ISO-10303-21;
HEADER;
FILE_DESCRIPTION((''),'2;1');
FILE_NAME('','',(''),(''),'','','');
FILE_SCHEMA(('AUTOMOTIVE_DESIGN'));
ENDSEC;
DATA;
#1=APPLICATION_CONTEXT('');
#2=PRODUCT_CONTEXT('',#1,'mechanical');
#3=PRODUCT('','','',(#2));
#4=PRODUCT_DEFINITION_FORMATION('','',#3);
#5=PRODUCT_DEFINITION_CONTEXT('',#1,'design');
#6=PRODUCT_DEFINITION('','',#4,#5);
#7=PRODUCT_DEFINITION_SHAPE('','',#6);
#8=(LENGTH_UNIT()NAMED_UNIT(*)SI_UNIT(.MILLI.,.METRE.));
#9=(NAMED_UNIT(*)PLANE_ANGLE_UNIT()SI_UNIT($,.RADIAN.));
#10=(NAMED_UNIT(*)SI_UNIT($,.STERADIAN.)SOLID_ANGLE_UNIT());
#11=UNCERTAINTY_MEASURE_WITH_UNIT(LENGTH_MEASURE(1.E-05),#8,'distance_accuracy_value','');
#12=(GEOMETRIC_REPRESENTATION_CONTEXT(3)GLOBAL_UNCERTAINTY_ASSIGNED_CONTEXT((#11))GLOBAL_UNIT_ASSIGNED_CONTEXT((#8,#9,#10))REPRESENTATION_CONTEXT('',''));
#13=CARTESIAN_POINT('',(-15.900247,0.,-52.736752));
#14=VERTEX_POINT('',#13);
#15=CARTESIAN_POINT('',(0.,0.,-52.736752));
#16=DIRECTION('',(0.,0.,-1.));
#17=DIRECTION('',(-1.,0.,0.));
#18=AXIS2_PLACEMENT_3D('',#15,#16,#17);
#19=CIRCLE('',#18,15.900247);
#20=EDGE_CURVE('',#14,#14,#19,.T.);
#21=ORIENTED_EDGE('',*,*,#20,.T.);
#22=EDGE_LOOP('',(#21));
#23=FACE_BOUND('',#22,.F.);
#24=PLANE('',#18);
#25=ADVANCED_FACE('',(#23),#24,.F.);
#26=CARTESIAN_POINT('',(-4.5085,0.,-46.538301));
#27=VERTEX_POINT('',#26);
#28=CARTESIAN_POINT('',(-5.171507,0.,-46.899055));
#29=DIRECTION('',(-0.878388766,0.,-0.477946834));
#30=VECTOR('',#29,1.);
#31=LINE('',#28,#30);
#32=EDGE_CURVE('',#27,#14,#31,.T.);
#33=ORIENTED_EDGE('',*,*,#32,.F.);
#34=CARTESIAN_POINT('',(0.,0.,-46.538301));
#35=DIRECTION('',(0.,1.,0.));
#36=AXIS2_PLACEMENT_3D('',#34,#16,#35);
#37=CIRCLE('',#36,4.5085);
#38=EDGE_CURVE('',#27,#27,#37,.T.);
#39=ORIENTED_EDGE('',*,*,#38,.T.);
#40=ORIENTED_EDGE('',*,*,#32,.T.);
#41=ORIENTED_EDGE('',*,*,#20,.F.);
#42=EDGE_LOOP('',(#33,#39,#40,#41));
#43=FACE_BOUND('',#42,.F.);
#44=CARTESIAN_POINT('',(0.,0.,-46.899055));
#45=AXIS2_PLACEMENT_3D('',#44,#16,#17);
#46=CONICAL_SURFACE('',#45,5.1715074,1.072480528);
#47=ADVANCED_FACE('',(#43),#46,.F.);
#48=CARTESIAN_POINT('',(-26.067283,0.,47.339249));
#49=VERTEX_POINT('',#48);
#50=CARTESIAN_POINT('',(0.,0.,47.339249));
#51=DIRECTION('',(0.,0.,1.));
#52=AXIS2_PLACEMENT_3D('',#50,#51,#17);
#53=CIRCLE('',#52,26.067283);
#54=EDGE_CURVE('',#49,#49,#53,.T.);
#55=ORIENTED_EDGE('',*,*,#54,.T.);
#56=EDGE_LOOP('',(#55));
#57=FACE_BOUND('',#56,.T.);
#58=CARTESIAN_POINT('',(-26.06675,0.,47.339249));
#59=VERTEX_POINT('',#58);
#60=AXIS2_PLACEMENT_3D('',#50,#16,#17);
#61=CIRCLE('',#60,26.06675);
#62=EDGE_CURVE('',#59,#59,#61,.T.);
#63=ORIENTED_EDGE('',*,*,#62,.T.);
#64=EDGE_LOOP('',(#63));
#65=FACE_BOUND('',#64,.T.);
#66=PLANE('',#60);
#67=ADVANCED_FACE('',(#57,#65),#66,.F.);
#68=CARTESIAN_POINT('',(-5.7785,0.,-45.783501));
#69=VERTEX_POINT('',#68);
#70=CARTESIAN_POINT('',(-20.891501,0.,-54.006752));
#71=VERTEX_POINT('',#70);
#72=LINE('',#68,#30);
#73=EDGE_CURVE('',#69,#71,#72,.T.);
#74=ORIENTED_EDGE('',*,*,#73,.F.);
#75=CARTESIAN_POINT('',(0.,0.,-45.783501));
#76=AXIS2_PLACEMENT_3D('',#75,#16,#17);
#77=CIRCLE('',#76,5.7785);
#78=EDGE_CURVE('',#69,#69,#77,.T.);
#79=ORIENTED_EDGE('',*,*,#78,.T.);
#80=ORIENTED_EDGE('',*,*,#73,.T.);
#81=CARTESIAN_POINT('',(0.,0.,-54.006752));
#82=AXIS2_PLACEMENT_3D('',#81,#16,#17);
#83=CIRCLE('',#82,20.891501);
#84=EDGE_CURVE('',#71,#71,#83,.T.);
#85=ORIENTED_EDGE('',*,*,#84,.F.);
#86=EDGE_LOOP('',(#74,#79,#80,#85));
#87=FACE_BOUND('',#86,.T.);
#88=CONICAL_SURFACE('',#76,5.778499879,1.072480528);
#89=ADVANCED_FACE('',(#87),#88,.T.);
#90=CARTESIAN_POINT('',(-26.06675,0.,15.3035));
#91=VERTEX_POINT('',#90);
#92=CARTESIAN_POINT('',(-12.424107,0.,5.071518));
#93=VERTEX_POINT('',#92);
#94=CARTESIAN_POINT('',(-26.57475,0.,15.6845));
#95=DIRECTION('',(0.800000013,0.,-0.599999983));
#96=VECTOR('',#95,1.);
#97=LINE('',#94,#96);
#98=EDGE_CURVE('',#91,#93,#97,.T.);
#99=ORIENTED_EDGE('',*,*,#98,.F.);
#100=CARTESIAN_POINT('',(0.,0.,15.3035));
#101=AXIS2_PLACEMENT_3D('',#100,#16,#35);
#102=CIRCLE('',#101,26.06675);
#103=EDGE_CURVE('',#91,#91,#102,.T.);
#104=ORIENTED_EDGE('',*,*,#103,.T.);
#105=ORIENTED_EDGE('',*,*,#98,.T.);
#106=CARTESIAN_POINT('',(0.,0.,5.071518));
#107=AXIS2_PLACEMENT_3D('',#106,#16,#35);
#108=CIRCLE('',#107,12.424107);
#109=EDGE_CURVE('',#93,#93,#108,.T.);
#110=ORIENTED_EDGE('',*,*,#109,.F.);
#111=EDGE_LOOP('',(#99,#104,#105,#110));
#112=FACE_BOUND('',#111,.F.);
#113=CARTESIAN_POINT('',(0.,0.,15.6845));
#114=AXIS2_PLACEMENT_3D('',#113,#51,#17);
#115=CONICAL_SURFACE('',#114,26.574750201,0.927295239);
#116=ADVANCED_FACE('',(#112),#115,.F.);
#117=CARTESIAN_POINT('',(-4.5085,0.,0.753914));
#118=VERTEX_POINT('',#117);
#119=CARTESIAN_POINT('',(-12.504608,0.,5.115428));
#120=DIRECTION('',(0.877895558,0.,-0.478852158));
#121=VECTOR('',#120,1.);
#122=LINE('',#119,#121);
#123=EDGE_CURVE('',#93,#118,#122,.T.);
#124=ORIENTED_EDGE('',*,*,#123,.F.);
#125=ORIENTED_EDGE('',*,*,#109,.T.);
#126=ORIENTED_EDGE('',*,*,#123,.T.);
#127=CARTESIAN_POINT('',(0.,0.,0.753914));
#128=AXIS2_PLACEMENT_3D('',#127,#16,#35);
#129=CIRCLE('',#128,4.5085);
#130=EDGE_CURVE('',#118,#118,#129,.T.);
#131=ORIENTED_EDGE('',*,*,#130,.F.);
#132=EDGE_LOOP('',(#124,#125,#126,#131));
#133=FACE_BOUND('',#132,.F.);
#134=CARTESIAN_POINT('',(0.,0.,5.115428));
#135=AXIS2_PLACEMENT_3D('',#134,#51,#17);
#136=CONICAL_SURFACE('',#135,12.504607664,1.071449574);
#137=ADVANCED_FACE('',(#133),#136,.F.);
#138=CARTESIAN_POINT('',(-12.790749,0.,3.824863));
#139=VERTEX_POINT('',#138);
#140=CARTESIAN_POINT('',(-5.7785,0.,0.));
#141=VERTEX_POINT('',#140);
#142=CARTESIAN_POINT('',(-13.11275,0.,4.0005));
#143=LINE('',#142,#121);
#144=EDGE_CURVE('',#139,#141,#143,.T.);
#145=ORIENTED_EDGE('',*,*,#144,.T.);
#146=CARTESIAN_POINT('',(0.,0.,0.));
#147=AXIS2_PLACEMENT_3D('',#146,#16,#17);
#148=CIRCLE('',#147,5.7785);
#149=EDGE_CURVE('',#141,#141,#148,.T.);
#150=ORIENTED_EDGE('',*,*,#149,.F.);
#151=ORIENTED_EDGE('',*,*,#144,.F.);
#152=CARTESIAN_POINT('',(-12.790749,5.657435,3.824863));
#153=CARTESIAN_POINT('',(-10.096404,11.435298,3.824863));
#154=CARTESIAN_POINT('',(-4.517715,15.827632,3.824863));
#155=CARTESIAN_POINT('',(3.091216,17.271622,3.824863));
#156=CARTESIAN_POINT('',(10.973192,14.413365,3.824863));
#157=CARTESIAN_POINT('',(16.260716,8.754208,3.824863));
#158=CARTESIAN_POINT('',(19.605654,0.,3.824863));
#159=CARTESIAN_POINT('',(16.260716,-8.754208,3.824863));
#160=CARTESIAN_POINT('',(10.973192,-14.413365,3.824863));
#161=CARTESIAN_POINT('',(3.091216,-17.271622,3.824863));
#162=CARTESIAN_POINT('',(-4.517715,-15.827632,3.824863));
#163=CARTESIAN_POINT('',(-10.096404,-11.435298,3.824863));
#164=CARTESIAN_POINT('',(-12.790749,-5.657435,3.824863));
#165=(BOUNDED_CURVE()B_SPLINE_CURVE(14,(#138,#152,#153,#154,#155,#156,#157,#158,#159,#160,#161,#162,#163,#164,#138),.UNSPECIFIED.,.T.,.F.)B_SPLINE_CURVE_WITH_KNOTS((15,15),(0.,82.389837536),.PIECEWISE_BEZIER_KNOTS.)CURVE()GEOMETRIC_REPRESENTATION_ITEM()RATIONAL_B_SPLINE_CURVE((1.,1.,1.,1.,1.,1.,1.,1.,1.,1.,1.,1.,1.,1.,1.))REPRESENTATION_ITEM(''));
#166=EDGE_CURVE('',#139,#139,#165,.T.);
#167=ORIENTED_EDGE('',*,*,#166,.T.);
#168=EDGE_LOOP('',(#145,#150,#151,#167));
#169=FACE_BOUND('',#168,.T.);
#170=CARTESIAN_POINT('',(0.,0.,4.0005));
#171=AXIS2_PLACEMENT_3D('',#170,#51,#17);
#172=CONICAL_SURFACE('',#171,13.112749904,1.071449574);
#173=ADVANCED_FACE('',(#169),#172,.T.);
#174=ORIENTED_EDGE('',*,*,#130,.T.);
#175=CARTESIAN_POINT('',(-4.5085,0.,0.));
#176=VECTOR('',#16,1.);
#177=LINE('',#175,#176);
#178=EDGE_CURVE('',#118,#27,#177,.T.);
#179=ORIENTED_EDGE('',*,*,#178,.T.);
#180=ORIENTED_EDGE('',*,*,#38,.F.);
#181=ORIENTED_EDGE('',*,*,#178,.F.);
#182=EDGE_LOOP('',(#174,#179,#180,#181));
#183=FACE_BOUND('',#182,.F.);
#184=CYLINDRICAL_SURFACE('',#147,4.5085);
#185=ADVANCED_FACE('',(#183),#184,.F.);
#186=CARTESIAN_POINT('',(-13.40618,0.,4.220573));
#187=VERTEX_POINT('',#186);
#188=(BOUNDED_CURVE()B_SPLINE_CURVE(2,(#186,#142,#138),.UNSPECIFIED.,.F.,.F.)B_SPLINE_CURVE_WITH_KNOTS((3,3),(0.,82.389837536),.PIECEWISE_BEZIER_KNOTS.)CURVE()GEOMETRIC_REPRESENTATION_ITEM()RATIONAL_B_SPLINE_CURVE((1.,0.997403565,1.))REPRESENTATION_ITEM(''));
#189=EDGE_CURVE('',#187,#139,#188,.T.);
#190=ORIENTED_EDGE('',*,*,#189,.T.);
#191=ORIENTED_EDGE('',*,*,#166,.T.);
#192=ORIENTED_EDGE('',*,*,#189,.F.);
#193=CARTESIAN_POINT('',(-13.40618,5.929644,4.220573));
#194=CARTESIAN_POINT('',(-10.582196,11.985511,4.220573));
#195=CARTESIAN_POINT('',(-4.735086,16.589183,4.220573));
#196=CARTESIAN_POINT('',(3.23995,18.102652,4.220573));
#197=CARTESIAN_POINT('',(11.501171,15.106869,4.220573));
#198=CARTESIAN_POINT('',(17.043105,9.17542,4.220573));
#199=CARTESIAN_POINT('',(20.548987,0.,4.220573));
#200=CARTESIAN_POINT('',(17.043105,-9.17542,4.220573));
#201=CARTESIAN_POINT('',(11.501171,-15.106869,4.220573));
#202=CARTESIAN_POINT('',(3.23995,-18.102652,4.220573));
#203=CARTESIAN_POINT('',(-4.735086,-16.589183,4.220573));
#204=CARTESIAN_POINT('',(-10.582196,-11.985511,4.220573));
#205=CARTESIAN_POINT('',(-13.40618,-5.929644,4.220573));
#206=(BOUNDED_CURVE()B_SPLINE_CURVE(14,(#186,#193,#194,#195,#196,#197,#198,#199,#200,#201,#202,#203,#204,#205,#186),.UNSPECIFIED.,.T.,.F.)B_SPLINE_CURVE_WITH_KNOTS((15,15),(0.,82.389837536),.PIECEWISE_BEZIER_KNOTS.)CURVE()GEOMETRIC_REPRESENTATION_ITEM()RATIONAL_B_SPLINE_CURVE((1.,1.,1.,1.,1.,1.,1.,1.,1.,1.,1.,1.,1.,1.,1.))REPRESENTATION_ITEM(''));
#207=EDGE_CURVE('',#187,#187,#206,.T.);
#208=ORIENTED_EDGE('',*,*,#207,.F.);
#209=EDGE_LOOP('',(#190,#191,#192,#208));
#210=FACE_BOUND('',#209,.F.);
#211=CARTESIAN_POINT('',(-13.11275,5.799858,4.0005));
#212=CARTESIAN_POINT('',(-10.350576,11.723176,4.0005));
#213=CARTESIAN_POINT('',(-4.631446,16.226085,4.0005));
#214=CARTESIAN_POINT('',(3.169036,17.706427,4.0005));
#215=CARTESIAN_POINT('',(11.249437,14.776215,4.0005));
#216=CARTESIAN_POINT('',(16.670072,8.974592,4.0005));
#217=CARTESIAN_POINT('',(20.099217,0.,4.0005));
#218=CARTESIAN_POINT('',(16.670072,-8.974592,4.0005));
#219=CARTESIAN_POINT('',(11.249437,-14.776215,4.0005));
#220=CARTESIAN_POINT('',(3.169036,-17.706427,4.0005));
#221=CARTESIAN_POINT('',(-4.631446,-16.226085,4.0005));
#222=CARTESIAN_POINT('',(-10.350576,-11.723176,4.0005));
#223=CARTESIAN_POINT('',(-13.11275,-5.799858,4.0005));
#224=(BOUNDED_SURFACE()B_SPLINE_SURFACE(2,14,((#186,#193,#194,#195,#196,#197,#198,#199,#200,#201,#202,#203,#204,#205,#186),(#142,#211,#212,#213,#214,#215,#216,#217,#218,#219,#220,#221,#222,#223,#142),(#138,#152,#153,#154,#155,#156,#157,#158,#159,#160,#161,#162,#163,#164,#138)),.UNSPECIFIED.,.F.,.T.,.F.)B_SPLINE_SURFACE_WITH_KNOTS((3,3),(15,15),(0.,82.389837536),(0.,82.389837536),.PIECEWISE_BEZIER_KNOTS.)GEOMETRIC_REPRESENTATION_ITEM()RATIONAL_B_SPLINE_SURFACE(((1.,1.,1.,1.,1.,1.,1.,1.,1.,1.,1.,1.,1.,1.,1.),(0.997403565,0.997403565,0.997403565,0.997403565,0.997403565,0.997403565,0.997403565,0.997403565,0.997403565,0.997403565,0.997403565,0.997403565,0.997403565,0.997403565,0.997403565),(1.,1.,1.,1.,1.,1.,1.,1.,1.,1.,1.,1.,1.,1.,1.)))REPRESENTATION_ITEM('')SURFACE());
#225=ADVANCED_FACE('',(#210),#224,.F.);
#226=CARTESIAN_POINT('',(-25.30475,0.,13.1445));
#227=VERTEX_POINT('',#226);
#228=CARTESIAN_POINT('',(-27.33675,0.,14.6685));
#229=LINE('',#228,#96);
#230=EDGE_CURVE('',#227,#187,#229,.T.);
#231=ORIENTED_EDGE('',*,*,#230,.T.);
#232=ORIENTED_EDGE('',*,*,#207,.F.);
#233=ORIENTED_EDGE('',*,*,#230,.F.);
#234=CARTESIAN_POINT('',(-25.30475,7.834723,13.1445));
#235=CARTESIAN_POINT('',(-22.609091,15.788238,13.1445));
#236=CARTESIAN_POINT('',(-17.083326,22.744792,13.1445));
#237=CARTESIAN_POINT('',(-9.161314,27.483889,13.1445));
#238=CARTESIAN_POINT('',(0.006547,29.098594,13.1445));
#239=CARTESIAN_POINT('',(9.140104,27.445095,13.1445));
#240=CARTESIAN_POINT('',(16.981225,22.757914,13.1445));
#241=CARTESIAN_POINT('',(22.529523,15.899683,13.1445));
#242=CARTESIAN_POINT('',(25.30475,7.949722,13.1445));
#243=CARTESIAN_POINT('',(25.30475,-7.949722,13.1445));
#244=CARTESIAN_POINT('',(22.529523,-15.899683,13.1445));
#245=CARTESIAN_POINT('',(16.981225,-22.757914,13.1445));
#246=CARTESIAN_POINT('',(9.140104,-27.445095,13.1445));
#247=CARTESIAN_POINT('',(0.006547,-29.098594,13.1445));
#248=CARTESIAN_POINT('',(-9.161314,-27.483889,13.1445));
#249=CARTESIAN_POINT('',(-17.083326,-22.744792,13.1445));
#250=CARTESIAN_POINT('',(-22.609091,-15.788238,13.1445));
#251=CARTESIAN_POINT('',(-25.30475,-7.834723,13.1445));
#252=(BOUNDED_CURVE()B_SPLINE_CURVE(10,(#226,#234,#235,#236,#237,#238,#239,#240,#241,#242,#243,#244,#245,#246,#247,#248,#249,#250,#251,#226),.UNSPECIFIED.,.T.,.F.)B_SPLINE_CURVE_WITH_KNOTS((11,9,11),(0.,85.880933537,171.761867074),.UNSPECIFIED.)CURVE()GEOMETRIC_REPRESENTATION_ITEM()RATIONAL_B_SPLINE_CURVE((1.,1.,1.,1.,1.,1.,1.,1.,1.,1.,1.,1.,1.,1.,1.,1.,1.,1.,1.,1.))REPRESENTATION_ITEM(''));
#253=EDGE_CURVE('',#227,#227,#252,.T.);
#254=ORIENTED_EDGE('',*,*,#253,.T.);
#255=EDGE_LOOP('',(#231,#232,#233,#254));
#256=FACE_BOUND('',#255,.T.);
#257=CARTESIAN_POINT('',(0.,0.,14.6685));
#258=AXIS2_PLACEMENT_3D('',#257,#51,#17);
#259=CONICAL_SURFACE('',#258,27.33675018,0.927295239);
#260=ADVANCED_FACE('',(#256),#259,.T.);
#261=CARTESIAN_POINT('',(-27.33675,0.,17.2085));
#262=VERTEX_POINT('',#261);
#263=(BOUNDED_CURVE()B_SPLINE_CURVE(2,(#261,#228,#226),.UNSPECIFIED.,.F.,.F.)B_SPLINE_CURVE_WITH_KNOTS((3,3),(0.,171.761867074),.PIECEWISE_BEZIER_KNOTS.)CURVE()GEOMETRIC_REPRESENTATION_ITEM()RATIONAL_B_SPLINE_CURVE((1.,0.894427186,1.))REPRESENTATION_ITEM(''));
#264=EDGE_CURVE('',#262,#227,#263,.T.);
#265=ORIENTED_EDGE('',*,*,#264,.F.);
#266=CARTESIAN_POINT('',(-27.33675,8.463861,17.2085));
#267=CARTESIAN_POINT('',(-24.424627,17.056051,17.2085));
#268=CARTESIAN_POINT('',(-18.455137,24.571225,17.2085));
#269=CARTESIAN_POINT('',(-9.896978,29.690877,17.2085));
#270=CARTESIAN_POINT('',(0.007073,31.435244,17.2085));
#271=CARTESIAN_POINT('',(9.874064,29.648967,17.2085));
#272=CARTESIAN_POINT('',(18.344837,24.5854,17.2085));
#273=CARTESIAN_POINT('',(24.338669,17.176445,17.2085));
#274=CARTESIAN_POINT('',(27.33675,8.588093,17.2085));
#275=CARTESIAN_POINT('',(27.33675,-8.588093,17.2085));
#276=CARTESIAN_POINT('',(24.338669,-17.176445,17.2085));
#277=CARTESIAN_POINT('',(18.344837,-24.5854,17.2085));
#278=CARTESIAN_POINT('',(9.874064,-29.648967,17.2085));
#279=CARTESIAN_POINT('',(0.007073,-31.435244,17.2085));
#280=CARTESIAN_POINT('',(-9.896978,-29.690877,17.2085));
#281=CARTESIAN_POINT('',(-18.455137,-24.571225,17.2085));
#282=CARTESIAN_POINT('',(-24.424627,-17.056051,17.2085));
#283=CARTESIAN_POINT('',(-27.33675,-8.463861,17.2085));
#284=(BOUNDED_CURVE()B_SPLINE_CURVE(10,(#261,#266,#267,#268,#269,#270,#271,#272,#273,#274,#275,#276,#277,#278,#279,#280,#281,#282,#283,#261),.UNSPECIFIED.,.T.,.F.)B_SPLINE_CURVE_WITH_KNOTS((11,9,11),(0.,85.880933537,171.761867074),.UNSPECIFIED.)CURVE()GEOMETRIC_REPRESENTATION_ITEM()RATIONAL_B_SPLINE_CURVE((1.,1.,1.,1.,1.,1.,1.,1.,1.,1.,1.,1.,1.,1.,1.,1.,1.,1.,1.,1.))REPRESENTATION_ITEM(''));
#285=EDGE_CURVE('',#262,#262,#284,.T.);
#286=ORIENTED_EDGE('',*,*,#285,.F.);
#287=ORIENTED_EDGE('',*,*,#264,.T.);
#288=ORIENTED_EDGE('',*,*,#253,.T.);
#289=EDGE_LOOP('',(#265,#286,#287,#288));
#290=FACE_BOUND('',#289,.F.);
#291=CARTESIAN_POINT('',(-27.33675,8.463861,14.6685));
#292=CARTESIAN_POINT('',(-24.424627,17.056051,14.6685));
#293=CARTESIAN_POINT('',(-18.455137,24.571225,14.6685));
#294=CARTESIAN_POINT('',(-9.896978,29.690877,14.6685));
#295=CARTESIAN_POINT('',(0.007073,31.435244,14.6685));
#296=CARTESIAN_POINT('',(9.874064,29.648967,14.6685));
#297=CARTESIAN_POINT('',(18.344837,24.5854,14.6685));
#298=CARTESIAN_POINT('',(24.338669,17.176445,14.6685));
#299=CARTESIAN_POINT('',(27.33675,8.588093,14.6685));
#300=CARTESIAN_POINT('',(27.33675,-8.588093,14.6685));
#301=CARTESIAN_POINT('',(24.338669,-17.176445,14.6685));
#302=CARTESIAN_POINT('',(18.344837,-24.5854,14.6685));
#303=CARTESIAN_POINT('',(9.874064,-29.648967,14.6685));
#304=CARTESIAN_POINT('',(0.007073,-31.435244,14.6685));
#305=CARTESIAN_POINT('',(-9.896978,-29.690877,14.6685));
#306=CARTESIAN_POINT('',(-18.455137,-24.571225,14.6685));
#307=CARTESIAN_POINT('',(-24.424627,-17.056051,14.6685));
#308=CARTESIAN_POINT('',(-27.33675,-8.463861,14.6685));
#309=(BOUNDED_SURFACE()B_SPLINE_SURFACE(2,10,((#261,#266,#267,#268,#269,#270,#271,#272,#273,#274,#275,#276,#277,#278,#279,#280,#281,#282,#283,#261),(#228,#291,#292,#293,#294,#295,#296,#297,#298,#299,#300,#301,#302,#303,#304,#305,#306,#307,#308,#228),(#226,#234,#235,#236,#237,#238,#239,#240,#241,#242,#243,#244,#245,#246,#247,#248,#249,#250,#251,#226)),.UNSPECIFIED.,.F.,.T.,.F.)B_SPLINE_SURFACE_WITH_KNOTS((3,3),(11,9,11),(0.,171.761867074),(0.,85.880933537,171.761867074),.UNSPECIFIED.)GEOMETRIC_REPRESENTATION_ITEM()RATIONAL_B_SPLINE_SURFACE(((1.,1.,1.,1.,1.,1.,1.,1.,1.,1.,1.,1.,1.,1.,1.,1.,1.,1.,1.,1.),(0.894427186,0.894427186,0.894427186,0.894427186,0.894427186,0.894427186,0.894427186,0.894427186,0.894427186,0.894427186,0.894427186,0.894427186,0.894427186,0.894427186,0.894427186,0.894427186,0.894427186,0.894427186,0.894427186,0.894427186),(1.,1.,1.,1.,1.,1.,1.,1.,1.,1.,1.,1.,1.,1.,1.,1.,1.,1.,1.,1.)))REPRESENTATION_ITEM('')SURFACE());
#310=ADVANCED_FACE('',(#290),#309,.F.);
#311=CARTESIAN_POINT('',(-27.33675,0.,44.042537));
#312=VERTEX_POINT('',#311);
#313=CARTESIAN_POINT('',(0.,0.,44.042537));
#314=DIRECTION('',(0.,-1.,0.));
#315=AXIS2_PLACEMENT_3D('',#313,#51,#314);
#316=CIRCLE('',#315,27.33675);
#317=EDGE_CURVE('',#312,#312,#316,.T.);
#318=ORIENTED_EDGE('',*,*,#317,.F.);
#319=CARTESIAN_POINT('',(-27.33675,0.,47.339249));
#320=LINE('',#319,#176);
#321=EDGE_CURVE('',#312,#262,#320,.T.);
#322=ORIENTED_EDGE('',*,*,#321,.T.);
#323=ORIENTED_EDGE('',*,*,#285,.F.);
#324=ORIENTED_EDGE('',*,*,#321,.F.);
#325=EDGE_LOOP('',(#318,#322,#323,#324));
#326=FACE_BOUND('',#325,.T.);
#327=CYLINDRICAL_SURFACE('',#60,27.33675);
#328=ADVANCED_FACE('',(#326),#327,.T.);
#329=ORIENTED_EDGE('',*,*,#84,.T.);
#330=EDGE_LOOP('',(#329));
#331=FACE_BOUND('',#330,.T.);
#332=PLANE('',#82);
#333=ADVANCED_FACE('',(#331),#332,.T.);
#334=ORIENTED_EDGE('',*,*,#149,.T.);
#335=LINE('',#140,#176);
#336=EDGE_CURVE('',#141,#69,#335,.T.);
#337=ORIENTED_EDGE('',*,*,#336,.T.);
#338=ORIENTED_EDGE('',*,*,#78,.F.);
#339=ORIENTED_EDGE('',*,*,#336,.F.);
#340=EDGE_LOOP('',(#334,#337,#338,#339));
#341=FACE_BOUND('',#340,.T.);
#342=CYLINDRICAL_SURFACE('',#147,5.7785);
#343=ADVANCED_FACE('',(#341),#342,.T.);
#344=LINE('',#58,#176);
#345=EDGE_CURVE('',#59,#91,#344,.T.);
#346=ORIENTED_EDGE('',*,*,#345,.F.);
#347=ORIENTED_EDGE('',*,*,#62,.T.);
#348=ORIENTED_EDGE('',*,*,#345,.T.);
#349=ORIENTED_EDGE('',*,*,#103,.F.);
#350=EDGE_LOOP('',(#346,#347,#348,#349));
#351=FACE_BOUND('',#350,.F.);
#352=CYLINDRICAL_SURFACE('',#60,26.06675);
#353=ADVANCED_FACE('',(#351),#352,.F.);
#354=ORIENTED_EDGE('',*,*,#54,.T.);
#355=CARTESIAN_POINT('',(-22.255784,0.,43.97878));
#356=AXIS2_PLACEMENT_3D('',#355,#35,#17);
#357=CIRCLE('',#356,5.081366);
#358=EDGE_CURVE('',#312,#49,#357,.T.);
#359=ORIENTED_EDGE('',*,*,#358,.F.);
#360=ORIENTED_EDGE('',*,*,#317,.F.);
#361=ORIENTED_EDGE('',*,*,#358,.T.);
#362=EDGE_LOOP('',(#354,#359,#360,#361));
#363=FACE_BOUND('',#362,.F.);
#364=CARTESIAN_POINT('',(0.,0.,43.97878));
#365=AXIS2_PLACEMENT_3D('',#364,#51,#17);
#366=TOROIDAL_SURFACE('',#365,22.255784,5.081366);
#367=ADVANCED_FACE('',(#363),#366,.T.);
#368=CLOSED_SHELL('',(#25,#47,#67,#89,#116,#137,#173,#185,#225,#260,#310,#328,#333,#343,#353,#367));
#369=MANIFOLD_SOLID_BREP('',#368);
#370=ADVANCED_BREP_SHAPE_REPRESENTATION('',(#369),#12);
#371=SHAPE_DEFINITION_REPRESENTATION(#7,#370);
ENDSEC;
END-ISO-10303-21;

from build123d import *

# Parameters (mm, degrees)
F2_T = -1.27
F4_R = 5.08


# Not quite as in the source:
# - a fillet or chamfer that OpenCascade refuses, or shapes differently, is made with other operations: its cross-section is extruded or revolved along the edge and cut away or added


with BuildPart() as f1:
    # F0 (on Front) → F1 (revolve)
    with BuildSketch(Plane.XZ):
        Polygon((0, -54.0067516267), (0, 47.3392494023), (-27.3367501795, 47.3392494023), (-27.3367501795, 14.6685000509), (-13.1127499044, 4.0005003102), (-5.7784998789, 0), (-5.7784998789, -45.7835011184), (-20.8915006369, -54.0067516267), align=None)
    revolve(axis=Axis((0, 0, -3.3337511122), (0, 0, -1)))

    # F2
    f2_openings = [f1.faces().sort_by_distance(p)[0] for p in [
        (0, 0, 47.339249),
    ]]
    offset(amount=F2_T, openings=f2_openings, kind=Kind.INTERSECTION)

    # F3: fillet of radius 5.08 on 1 edges, made by hand

    # F3_s1 → F3_t2 (revolve, cut)
    with BuildSketch(Plane.XZ):
        with BuildLine():
            ThreePointArc((-27.3371501795, 43.9787802623), (-27.0090313843, 45.775143597), (-26.0670501985, 47.3395139559))
            Line((-26.0670501985, 47.3395139559), (-26.448176769, 47.6755873252))
            ThreePointArc((-26.448176769, 47.6755873252), (-26.701900189, 47.8473859708), (-27.3367501795, 47.8473859708))
            Line((-27.3367501795, 47.8473859708), (-27.8448867481, 47.3392494023))
            ThreePointArc((-27.8448867481, 47.3392494023), (-27.8448867481, 45.6590148323), (-27.8452867481, 43.9787802623))
            Line((-27.8452867481, 43.9787802623), (-27.3371501795, 43.9787802623))
        make_face()
    revolve(axis=Axis((0, 0, 47.3392494023), (0, 0, -1)), mode=Mode.SUBTRACT)

    # F4
    f4_edges = [f1.edges().sort_by_distance(p)[0] for p in [
        (27.33675, 0, 14.6685),
        (13.11275, 0, 4.0005),
        (-20.22475, 0, 9.3345),
    ]]
    fillet(f4_edges, radius=F4_R)


solid = f1.part
